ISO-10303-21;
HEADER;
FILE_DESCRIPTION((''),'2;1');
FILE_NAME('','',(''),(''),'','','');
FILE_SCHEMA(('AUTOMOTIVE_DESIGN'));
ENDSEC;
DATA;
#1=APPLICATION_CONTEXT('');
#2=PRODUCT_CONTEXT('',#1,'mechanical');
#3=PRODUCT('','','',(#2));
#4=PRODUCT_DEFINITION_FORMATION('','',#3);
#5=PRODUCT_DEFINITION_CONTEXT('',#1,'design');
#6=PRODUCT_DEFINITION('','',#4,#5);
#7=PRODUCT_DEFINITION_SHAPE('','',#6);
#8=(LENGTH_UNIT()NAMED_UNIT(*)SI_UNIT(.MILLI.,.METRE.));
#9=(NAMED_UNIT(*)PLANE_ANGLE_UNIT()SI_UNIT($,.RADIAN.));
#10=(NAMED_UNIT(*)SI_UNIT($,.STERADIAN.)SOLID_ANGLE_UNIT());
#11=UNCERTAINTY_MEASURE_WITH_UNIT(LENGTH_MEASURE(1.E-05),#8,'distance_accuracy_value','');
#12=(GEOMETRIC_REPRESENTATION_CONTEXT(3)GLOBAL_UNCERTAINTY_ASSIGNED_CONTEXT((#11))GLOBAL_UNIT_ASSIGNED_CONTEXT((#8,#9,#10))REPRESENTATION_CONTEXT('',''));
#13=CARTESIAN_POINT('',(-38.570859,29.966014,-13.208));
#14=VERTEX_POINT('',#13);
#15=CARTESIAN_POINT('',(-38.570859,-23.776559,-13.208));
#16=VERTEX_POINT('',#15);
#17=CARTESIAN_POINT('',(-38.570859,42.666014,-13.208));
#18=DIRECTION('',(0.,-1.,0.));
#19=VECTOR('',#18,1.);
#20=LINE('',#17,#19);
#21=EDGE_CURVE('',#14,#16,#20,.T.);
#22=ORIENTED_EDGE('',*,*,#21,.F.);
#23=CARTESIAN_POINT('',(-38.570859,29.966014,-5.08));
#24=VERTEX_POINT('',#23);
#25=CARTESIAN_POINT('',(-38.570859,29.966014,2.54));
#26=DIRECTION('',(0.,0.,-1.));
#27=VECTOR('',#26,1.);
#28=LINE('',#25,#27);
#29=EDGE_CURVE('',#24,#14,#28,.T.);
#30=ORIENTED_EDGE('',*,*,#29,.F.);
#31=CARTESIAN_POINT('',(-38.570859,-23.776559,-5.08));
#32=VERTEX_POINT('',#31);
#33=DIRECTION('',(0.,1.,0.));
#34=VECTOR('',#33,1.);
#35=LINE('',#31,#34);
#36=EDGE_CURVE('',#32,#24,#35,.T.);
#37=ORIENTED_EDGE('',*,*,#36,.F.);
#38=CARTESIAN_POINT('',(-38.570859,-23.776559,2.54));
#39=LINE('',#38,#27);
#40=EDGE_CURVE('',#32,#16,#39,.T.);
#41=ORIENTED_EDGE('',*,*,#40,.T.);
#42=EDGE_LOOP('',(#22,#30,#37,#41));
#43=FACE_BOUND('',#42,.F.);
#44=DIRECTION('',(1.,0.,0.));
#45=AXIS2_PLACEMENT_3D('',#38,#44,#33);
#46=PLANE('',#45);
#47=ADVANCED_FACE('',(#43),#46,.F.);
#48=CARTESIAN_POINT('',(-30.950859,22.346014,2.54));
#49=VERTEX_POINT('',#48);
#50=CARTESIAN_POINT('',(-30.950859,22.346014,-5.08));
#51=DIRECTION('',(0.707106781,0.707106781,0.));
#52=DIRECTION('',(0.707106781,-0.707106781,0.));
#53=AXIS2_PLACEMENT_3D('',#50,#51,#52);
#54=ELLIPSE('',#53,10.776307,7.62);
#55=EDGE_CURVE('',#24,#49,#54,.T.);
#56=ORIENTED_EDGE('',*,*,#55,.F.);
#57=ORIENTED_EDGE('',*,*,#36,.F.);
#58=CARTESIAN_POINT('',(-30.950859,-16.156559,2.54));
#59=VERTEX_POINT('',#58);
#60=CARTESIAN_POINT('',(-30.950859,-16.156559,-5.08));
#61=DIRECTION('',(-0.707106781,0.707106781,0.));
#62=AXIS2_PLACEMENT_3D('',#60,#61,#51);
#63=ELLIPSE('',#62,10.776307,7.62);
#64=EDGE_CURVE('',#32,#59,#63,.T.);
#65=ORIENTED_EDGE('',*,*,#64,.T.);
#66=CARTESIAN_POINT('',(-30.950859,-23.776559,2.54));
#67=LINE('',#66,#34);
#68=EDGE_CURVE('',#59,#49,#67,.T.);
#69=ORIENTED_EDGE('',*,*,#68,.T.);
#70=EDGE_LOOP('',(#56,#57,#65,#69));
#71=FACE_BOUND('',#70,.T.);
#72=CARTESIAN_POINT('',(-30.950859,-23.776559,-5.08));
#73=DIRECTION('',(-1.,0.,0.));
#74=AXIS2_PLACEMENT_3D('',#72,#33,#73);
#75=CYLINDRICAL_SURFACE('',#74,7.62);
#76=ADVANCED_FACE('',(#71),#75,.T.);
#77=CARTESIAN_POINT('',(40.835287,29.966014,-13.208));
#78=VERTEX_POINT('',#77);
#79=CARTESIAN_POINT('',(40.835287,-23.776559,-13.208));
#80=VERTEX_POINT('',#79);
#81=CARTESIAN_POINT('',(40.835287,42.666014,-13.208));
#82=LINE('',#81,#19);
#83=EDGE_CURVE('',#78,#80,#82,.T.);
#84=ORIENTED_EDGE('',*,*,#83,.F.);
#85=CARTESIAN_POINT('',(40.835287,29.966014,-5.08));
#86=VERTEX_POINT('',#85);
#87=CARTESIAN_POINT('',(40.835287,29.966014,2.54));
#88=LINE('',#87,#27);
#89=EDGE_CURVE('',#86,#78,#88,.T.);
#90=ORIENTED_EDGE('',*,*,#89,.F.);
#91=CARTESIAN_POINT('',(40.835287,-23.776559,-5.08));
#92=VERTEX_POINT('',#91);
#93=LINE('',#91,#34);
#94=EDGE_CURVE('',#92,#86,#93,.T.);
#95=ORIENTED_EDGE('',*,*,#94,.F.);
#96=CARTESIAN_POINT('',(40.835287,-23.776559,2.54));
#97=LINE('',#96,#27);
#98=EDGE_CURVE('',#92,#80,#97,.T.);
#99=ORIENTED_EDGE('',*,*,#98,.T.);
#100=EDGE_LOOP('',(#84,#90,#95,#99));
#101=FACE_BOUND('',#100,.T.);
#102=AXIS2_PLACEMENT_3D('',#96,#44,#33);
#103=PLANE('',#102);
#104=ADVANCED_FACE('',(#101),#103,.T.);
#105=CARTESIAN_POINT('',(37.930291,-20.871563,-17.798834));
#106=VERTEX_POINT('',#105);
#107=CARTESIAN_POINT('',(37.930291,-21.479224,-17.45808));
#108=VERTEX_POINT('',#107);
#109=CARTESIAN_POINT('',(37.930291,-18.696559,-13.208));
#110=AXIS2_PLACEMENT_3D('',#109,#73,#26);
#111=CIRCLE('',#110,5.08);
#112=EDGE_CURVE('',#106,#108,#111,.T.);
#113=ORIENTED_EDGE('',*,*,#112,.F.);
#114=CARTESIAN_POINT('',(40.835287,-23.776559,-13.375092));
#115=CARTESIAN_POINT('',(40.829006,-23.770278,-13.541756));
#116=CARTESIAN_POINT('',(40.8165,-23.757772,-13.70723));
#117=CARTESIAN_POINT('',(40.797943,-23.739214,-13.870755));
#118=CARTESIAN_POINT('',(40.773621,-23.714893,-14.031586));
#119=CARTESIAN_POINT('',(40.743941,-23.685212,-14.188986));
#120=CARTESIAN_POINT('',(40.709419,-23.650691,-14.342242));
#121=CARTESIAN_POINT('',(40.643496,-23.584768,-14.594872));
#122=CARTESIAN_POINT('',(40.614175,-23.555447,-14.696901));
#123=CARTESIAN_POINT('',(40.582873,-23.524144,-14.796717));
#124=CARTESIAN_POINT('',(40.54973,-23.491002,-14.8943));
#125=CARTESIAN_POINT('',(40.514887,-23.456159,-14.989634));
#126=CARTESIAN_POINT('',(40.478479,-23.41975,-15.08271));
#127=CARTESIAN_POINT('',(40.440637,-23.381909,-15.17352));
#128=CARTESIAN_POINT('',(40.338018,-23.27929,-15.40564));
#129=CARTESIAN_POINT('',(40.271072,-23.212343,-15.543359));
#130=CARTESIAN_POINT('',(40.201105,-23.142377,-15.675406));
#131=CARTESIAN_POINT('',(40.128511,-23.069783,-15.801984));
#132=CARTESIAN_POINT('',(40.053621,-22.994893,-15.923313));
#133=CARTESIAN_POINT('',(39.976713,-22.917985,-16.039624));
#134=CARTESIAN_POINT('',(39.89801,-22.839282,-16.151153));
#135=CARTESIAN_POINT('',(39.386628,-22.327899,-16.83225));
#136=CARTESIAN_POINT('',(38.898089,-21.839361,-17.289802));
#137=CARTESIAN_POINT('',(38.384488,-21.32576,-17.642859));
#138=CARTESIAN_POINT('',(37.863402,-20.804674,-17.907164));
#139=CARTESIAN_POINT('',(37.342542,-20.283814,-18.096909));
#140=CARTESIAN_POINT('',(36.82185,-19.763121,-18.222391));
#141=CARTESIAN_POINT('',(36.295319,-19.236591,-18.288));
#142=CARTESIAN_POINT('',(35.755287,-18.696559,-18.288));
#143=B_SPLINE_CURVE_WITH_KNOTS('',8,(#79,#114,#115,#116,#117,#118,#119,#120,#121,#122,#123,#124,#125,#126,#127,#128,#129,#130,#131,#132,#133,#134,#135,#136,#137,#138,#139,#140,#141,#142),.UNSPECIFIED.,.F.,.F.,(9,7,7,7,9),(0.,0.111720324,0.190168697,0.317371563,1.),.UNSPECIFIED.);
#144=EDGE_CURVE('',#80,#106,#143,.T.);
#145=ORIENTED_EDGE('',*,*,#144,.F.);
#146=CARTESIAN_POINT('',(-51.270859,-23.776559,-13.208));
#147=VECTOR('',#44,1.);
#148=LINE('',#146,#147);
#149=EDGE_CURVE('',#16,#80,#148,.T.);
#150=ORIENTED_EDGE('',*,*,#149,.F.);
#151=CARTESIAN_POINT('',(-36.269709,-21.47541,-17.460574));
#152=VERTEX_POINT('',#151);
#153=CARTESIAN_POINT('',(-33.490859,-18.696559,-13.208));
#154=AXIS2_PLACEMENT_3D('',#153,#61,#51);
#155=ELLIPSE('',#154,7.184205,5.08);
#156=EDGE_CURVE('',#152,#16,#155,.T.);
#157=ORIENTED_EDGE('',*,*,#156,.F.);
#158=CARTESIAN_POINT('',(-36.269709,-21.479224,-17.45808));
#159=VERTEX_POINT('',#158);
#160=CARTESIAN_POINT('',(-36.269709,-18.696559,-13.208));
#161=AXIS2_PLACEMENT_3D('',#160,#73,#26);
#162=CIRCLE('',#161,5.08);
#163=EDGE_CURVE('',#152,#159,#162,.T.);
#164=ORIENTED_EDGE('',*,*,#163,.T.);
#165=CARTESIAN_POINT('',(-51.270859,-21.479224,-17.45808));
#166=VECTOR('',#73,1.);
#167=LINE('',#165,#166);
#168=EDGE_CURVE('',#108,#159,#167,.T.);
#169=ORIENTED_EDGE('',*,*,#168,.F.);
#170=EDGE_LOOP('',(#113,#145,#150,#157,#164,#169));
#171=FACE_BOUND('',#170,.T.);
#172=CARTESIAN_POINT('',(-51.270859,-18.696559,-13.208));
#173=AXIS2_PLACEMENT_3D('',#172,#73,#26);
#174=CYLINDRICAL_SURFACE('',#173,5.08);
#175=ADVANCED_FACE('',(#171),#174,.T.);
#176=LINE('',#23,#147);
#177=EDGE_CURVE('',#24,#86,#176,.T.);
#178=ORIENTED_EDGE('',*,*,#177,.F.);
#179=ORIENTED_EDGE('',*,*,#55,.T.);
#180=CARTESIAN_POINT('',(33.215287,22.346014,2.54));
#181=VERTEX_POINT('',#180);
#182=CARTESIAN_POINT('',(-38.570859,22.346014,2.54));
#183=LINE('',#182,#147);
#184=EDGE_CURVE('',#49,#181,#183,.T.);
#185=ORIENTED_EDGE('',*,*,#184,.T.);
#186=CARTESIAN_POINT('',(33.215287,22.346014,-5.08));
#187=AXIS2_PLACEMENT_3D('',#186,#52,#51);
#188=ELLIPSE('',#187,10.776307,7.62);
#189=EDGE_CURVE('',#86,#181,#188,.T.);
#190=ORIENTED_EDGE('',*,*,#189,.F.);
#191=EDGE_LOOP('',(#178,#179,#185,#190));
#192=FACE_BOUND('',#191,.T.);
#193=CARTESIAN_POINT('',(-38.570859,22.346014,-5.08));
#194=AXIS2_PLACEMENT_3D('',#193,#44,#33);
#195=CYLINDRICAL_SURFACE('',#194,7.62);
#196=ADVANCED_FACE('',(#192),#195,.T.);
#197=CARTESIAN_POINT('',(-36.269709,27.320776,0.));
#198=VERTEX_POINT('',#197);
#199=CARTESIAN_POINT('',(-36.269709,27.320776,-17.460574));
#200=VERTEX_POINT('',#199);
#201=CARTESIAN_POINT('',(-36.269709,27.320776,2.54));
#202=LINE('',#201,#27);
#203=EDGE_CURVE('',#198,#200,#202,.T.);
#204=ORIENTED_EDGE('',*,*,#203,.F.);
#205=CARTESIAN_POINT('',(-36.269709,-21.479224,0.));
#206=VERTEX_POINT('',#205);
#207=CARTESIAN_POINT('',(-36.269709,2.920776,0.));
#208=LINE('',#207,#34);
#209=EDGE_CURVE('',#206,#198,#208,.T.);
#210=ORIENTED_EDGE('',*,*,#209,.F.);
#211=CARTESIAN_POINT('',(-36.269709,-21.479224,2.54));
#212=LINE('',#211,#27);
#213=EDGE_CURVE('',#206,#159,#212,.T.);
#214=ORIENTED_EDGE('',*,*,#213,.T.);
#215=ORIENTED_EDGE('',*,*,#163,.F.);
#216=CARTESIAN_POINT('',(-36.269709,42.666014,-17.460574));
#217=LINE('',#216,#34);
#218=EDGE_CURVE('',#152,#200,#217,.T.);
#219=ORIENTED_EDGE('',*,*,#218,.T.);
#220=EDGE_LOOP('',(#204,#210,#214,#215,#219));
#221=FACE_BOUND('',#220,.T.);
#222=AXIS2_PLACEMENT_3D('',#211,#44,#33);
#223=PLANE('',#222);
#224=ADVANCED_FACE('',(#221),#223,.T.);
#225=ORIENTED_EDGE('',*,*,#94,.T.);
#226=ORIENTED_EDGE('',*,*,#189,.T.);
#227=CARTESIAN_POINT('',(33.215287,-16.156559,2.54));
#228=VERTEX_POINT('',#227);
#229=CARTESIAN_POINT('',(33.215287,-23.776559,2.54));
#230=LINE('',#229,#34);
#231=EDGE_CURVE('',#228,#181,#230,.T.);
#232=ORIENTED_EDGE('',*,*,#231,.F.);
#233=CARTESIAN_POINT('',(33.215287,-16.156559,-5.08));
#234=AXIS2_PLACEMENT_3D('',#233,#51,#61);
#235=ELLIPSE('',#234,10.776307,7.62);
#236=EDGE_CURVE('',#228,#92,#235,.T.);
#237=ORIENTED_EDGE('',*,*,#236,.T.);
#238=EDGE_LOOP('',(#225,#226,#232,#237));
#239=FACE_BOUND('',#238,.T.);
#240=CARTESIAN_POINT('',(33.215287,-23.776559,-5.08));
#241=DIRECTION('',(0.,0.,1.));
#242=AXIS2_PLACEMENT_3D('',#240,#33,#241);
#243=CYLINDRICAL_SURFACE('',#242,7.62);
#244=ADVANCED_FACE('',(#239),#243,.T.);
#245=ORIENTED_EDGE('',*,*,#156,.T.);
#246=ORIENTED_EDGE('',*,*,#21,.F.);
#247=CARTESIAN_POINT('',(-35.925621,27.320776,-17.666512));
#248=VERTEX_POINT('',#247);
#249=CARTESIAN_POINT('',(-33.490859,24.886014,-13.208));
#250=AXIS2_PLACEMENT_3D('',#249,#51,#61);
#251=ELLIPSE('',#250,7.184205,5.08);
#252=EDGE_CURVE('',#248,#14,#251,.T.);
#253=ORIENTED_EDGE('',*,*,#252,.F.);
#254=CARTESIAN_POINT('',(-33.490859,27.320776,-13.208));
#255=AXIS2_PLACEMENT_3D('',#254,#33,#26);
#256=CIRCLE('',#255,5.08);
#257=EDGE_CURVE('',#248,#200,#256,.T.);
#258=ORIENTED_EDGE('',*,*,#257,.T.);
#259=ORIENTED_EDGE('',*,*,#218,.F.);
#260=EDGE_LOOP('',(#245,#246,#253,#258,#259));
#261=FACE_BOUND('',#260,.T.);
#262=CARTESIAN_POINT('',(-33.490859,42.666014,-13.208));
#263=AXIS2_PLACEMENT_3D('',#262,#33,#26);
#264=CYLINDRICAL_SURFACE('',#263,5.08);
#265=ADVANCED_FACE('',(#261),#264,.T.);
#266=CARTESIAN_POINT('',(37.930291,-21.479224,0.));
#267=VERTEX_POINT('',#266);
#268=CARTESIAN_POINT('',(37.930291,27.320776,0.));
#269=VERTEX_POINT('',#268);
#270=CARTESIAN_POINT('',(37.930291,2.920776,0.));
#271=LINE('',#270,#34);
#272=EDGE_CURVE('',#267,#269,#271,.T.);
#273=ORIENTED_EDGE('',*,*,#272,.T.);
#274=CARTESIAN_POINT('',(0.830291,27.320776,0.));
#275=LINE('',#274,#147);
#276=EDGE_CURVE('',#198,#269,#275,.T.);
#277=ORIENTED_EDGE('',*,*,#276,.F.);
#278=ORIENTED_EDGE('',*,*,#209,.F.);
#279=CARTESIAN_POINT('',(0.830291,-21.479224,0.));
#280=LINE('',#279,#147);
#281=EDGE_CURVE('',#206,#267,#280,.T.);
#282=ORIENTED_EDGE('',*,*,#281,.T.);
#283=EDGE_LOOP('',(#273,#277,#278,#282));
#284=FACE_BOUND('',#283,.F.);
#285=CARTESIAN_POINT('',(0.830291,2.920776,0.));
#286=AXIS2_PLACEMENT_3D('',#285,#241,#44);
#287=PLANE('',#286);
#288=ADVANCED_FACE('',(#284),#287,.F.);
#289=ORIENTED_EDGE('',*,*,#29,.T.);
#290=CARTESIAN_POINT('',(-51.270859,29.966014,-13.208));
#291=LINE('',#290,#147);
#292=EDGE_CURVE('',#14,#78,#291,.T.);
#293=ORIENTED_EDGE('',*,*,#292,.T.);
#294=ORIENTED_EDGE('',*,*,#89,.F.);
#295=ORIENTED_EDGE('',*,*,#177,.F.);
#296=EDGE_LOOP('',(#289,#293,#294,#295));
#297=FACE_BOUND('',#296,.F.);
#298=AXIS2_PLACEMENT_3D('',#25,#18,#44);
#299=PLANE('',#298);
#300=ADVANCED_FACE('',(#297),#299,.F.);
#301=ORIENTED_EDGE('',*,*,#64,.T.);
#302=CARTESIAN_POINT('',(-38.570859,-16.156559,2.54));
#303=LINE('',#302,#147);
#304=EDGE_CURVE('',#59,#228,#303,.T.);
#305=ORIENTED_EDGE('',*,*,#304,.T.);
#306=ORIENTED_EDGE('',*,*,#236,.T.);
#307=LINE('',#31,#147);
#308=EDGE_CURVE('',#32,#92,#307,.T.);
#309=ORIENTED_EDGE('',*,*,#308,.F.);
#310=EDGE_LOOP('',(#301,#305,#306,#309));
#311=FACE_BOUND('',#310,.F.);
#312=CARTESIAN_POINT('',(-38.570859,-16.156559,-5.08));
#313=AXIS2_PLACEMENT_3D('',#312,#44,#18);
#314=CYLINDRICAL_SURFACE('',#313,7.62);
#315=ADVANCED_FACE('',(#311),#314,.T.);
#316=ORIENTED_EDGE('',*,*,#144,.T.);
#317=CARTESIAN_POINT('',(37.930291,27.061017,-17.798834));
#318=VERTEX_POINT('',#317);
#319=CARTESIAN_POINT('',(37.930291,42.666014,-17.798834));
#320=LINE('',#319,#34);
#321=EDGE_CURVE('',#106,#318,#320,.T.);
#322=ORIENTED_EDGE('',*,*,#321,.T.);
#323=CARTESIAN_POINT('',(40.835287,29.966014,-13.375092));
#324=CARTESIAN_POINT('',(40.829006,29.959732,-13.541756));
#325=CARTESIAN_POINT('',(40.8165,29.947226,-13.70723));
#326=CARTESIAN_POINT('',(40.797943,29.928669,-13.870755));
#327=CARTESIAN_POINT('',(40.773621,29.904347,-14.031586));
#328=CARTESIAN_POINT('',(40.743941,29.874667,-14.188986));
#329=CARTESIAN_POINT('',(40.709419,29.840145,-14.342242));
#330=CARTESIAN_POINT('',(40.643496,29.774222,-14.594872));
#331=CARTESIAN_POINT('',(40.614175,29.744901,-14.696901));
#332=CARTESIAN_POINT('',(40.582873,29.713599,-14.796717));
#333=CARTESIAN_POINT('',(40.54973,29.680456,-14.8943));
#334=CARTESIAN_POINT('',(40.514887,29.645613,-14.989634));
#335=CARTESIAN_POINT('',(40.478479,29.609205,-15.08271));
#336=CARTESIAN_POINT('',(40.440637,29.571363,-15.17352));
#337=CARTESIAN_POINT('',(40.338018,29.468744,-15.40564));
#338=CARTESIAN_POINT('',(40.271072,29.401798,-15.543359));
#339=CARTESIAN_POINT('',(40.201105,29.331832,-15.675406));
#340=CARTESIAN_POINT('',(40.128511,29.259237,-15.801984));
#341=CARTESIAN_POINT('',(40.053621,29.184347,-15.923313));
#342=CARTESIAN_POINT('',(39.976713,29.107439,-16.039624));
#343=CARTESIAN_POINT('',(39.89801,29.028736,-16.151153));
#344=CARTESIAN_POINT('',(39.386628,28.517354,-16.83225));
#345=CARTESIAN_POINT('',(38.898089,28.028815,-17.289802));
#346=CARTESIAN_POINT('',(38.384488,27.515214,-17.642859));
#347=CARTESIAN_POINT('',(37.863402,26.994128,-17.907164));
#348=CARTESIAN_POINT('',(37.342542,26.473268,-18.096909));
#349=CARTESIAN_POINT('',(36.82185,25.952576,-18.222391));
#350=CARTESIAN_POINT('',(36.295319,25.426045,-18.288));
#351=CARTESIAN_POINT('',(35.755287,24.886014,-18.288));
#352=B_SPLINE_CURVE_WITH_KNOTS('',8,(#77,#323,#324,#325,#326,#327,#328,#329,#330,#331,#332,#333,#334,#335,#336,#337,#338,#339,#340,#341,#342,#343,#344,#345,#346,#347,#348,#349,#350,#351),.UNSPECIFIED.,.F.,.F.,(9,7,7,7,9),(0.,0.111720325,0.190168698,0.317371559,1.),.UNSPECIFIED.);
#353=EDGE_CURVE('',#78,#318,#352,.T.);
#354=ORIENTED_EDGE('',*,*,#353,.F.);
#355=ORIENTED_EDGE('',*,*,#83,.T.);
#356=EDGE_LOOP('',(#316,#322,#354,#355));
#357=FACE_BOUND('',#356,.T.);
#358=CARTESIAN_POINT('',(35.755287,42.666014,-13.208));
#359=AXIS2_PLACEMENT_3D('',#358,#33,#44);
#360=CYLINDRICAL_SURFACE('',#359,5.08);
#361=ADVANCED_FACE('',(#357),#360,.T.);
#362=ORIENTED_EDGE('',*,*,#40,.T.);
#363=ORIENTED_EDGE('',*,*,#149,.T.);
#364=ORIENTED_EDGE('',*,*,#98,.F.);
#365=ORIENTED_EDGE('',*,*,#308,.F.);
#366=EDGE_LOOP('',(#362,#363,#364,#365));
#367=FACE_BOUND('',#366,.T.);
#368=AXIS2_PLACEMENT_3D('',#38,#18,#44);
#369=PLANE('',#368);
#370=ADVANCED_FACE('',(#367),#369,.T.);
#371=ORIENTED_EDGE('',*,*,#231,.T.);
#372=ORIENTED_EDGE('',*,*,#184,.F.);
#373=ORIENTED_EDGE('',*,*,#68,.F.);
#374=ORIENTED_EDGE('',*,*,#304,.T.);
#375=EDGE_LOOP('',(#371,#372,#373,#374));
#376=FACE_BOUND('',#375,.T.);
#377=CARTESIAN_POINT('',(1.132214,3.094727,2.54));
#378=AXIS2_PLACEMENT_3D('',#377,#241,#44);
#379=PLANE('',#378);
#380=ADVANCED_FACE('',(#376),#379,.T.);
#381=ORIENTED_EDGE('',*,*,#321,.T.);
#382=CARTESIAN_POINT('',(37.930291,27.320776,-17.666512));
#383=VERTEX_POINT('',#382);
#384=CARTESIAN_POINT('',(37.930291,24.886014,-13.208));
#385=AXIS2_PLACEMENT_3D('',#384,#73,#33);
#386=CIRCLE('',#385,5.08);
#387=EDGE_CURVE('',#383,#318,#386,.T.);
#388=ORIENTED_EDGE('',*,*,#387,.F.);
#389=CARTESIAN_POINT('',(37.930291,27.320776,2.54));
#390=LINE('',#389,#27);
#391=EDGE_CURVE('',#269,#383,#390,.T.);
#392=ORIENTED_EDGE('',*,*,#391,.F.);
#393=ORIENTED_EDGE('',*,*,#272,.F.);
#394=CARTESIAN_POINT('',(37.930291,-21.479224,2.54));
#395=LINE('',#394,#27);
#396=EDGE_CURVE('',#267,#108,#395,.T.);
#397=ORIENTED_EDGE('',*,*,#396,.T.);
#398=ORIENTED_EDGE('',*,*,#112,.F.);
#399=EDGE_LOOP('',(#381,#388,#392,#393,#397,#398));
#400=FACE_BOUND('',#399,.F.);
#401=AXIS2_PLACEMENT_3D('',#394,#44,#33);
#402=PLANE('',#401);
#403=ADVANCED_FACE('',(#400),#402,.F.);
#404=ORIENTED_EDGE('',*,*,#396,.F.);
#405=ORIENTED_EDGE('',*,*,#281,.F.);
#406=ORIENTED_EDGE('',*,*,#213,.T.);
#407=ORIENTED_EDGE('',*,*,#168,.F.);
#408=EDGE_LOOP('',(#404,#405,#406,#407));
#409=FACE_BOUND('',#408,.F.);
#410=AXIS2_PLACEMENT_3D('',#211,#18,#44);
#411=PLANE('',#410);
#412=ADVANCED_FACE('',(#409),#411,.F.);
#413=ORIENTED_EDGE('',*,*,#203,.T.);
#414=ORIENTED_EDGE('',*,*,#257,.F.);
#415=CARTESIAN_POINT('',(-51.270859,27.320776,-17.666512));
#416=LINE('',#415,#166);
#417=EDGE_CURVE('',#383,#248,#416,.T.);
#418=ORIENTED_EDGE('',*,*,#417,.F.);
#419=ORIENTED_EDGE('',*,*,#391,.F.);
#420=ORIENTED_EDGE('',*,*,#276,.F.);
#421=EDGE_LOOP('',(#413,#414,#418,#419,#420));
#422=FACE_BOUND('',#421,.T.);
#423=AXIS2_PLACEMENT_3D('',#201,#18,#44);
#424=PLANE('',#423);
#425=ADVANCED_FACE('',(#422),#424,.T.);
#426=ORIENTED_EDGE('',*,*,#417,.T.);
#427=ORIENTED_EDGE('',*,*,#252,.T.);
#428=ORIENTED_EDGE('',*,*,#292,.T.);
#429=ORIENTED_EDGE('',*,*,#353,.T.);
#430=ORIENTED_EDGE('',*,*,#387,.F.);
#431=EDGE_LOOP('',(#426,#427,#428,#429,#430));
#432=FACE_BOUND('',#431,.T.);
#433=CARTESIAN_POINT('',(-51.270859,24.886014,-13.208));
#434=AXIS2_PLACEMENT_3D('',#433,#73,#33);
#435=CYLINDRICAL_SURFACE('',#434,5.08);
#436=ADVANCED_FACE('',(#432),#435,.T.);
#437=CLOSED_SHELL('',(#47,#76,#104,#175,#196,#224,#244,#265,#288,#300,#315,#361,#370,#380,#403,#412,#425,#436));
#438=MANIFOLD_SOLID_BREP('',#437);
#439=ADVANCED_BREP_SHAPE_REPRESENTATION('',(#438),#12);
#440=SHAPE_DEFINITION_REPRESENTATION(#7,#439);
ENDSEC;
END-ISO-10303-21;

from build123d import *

# Parameters (mm, degrees)
F0_W        = 74.2
F0_H        = 48.8
F1_DEPTH    = 2.54
F2_W        = 79.4061459601
F2_H        = 53.7425726652
F2_W_2      = 74.2
F2_H_2      = 48.8
F3_DEPTH    = 20.828
F4_R        = 7.62
F5_T1_DEPTH = 79.1425726652
F5_T3_DEPTH = 104.8061459601


# Not quite as in the source:
# - a fillet or chamfer that OpenCascade refuses, or shapes differently, is made with other operations: its cross-section is extruded or revolved along the edge and cut away or added


with BuildPart() as f1:
    # F0 (on Top) → F1 (new body)
    with BuildSketch(Plane.XY):
        with Locations((0.8302908391, 2.9207762395)):
            Rectangle(F0_W, F0_H)
    extrude(amount=F1_DEPTH)

    # F2 (on face) → F3 (join)
    with BuildSketch(Plane.XY.offset(2.54)):
        with Locations((1.1322144419, 3.0947271734)):
            Rectangle(F2_W, F2_H)
        with Locations((0.8302908391, 2.9207762395)):
            Rectangle(F2_W_2, F2_H_2, mode=Mode.SUBTRACT)
    extrude(amount=-F3_DEPTH)

    # F4
    f4_edges = [f1.edges().sort_by_distance(p)[0] for p in [
        (1.132214, 29.966014, 2.54),
        (-38.570859, 3.094727, 2.54),
        (40.835287, 3.094727, 2.54),
        (1.132214, -23.776559, 2.54),
    ]]
    fillet(f4_edges, radius=F4_R)

    # F5: fillet of radius 5.08 on 4 edges, made by hand

    # F5_s2 → F5_t1 (cut)
    with BuildSketch(Plane.XZ.offset(-42.6660135061)):
        with BuildLine():
            ThreePointArc((40.8352874219, -13.208), (39.3473898704, -16.8001024484), (35.7552874219, -18.288))
            Line((35.7552874219, -18.288), (40.8352874219, -18.288))
            Line((40.8352874219, -18.288), (40.8352874219, -13.208))
        make_face()
        with BuildLine():
            ThreePointArc((-33.4908585382, -18.288), (-37.0829609866, -16.8001024484), (-38.5708585382, -13.208))
            Line((-38.5708585382, -13.208), (-38.5708585382, -18.288))
            Line((-38.5708585382, -18.288), (-33.4908585382, -18.288))
        make_face()
    extrude(amount=F5_T1_DEPTH, mode=Mode.SUBTRACT)

    # F5_s4 → F5_t3 (cut)
    with BuildSketch(Plane.YZ.offset(-51.2708585382)):
        with BuildLine():
            ThreePointArc((-18.6965591592, -18.288), (-22.2886616076, -16.8001024484), (-23.7765591592, -13.208))
            Line((-23.7765591592, -13.208), (-23.7765591592, -18.288))
            Line((-23.7765591592, -18.288), (-18.6965591592, -18.288))
        make_face()
        with BuildLine():
            ThreePointArc((29.9660135061, -13.208), (28.4781159545, -16.8001024484), (24.8860135061, -18.288))
            Line((24.8860135061, -18.288), (29.9660135061, -18.288))
            Line((29.9660135061, -18.288), (29.9660135061, -13.208))
        make_face()
    extrude(amount=F5_T3_DEPTH, mode=Mode.SUBTRACT)


solid = f1.part
